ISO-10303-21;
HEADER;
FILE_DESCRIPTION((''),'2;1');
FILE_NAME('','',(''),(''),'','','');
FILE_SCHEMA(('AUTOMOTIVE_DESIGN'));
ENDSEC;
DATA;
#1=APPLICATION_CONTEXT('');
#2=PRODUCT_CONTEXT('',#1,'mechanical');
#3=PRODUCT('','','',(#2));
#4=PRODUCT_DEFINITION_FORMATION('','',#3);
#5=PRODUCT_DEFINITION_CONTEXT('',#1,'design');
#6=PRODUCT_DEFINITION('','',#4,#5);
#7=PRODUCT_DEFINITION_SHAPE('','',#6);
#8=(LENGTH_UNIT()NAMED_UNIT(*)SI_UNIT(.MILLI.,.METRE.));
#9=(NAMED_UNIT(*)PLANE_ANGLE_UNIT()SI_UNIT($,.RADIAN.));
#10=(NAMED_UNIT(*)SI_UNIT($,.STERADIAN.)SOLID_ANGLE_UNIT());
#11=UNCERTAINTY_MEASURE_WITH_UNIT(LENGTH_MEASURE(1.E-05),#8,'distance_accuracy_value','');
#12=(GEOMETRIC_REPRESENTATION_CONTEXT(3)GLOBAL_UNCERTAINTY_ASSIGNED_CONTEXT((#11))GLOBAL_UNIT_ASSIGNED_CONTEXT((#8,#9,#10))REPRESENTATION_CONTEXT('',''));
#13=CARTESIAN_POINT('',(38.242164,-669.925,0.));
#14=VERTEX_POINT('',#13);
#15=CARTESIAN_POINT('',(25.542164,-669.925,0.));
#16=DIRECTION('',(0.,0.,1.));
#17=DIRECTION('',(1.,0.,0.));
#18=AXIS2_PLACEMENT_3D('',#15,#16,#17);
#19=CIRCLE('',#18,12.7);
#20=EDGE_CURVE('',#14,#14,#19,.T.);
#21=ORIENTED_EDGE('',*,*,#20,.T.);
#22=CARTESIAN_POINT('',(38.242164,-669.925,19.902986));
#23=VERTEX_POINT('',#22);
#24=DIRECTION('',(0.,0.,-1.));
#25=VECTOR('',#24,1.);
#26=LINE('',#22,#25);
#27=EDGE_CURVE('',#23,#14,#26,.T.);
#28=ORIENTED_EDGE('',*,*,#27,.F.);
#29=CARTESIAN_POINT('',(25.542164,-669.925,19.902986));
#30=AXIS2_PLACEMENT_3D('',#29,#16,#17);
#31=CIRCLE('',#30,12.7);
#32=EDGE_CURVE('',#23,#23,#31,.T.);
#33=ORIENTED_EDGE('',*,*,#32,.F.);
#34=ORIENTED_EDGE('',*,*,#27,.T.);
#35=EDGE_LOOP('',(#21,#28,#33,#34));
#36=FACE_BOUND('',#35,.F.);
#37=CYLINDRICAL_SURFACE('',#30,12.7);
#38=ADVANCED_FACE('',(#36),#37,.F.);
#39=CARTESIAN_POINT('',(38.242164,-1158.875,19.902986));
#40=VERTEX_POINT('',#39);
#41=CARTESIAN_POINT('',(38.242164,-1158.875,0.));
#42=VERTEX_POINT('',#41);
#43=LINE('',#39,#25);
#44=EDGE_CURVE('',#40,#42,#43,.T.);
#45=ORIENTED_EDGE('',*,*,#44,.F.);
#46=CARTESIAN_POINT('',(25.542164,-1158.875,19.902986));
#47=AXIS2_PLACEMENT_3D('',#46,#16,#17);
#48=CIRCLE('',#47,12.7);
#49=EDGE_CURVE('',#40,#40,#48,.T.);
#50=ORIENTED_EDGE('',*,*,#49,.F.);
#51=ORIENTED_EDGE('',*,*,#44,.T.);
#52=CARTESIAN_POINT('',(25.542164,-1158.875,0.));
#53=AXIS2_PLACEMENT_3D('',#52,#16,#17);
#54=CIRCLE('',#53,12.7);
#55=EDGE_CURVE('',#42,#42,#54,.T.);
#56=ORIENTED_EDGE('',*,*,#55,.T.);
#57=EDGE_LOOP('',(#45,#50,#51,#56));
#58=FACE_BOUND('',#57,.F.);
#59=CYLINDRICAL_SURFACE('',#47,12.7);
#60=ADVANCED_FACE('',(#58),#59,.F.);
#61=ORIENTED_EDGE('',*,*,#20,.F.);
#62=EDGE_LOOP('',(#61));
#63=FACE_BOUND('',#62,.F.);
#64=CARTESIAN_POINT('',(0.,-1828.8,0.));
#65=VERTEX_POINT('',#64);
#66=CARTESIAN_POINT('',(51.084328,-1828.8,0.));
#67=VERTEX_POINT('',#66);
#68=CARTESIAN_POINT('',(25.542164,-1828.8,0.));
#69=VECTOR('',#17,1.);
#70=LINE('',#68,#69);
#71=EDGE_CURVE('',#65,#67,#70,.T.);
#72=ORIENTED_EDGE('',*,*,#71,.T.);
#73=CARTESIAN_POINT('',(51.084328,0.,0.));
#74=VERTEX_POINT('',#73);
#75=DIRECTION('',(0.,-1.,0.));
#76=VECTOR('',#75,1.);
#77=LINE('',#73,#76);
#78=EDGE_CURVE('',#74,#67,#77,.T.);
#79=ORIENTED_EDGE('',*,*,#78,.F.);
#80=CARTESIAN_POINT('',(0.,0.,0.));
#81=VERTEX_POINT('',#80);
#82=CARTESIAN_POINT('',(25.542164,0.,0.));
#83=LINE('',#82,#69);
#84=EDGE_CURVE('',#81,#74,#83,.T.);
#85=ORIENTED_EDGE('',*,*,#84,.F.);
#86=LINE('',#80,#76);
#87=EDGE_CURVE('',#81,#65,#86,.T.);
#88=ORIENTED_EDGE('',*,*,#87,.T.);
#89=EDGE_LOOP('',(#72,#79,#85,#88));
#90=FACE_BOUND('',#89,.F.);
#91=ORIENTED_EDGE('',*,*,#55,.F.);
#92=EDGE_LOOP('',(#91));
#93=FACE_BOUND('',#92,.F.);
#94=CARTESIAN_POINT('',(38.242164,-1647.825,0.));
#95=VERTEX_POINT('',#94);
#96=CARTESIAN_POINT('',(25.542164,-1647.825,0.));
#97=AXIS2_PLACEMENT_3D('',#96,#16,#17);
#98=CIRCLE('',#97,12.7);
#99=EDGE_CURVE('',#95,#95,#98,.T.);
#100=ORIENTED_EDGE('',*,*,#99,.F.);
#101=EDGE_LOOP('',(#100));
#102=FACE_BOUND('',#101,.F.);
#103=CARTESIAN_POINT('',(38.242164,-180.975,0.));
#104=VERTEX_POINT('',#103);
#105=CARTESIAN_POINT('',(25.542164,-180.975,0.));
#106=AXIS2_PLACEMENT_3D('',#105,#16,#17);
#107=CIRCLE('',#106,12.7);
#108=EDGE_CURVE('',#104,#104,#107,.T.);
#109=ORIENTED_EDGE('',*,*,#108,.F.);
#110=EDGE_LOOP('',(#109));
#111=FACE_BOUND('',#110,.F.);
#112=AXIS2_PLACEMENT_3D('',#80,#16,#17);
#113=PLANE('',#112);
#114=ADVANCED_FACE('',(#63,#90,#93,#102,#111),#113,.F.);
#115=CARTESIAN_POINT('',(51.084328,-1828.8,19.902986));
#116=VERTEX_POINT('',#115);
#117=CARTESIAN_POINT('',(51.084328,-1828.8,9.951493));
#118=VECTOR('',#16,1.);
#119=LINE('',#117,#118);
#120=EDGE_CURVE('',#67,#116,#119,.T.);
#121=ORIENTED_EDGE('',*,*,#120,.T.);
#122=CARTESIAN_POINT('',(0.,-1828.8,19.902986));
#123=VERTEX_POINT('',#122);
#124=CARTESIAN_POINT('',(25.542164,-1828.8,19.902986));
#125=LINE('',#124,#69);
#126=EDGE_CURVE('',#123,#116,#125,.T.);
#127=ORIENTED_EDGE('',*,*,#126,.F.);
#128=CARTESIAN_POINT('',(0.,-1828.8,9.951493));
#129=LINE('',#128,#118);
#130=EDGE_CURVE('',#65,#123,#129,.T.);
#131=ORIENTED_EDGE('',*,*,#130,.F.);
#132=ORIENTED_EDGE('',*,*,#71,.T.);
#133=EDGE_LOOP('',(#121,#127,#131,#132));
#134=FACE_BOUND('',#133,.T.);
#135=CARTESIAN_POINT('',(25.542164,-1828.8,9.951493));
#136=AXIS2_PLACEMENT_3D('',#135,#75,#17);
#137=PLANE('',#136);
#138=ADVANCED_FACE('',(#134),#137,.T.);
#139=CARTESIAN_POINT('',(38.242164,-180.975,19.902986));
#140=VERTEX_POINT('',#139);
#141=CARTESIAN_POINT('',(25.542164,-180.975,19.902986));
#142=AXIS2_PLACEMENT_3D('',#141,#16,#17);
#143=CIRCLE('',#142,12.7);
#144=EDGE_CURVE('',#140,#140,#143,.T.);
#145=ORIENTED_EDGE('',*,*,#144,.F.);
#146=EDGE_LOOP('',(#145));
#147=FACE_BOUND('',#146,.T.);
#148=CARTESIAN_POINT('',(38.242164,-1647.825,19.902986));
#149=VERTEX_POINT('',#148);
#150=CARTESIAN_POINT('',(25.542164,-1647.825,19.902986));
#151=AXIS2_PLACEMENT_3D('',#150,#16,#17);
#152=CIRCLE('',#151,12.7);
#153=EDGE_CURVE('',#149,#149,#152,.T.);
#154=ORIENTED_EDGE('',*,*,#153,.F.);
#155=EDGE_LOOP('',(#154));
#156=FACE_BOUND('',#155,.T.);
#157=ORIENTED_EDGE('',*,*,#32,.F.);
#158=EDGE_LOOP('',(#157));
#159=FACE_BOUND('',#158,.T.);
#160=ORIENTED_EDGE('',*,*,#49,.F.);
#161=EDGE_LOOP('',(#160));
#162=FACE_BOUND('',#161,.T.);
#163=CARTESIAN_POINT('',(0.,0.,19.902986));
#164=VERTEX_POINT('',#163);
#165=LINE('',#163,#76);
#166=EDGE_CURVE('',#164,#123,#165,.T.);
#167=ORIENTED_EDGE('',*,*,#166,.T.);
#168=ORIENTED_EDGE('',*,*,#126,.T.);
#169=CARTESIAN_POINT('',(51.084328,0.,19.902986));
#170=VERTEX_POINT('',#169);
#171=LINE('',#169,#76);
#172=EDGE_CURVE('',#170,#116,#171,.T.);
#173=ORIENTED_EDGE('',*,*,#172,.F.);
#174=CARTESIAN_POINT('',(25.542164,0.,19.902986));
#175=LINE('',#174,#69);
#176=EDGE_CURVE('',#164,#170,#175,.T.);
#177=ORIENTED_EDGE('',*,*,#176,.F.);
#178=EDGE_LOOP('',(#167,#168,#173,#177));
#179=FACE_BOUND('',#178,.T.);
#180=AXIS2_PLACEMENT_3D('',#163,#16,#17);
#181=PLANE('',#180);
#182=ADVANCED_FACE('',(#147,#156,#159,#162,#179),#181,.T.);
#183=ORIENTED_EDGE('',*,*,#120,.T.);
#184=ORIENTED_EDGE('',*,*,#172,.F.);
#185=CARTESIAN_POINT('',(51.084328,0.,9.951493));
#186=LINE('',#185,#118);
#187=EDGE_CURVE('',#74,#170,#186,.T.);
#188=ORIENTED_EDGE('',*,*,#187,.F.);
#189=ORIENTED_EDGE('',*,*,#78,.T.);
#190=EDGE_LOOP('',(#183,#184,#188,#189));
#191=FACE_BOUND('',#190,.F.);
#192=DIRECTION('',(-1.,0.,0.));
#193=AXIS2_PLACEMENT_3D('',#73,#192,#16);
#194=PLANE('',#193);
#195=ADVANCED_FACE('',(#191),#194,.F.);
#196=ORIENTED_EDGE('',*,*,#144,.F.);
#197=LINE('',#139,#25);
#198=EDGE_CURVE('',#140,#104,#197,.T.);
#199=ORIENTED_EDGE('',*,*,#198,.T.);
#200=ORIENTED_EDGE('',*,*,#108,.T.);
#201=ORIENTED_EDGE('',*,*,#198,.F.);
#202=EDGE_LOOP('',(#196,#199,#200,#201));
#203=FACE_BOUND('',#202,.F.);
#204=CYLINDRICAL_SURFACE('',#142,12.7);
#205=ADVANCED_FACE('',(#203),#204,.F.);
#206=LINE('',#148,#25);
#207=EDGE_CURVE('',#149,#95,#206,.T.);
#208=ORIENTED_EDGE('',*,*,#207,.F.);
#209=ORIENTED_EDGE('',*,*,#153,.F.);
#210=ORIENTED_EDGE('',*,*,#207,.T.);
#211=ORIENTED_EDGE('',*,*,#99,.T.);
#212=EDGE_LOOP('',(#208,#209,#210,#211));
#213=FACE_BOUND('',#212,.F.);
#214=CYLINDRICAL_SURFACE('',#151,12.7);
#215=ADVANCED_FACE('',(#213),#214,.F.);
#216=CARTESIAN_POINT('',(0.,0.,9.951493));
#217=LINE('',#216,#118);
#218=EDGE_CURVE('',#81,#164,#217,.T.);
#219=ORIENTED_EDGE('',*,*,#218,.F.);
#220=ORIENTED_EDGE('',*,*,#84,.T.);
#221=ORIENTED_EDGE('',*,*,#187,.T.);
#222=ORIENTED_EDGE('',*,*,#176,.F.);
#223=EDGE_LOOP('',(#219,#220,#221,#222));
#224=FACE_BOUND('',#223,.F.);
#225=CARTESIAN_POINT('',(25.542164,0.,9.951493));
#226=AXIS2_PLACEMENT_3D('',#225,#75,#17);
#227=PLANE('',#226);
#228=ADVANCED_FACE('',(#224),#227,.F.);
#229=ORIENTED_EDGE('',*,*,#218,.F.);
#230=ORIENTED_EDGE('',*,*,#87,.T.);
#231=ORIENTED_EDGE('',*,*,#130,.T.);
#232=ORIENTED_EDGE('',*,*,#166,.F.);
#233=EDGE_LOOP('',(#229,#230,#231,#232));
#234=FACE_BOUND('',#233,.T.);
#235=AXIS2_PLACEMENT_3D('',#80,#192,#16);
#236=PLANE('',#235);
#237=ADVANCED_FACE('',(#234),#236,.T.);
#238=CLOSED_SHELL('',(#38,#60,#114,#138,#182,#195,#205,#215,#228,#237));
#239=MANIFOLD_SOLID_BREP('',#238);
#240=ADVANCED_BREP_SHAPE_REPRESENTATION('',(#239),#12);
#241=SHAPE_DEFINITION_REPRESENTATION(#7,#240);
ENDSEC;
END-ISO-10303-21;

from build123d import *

# Parameters (mm, degrees)
F0_W     = 51.0843284428
F0_H     = 19.902985543
F1_DEPTH = 1828.8
F2_R     = 12.7
F3_DEPTH = 19.902985543


# Not quite as in the source:
# - a feature names something its author has since deleted; it is built from what else it names


with BuildPart() as f1:
    # F0 (on Front) → F1 (new body)
    with BuildSketch(Plane.XZ):
        with Locations((25.5421642214, 9.9514927715)):
            Rectangle(F0_W, F0_H)
    extrude(amount=F1_DEPTH)

    # F2 (on face) → F3 (cut, through all)
    with BuildSketch(Plane.XY.offset(19.902985543)):
        with Locations((25.5421642214, -1158.875)):
            Circle(F2_R)
        with Locations((25.5421642214, -669.925)):
            Circle(F2_R)
        with Locations((25.5421642214, -180.975)):
            Circle(F2_R)
        with Locations((25.5421642214, -1647.825)):
            Circle(F2_R)
    extrude(amount=-F3_DEPTH, mode=Mode.SUBTRACT)


solid = f1.part
